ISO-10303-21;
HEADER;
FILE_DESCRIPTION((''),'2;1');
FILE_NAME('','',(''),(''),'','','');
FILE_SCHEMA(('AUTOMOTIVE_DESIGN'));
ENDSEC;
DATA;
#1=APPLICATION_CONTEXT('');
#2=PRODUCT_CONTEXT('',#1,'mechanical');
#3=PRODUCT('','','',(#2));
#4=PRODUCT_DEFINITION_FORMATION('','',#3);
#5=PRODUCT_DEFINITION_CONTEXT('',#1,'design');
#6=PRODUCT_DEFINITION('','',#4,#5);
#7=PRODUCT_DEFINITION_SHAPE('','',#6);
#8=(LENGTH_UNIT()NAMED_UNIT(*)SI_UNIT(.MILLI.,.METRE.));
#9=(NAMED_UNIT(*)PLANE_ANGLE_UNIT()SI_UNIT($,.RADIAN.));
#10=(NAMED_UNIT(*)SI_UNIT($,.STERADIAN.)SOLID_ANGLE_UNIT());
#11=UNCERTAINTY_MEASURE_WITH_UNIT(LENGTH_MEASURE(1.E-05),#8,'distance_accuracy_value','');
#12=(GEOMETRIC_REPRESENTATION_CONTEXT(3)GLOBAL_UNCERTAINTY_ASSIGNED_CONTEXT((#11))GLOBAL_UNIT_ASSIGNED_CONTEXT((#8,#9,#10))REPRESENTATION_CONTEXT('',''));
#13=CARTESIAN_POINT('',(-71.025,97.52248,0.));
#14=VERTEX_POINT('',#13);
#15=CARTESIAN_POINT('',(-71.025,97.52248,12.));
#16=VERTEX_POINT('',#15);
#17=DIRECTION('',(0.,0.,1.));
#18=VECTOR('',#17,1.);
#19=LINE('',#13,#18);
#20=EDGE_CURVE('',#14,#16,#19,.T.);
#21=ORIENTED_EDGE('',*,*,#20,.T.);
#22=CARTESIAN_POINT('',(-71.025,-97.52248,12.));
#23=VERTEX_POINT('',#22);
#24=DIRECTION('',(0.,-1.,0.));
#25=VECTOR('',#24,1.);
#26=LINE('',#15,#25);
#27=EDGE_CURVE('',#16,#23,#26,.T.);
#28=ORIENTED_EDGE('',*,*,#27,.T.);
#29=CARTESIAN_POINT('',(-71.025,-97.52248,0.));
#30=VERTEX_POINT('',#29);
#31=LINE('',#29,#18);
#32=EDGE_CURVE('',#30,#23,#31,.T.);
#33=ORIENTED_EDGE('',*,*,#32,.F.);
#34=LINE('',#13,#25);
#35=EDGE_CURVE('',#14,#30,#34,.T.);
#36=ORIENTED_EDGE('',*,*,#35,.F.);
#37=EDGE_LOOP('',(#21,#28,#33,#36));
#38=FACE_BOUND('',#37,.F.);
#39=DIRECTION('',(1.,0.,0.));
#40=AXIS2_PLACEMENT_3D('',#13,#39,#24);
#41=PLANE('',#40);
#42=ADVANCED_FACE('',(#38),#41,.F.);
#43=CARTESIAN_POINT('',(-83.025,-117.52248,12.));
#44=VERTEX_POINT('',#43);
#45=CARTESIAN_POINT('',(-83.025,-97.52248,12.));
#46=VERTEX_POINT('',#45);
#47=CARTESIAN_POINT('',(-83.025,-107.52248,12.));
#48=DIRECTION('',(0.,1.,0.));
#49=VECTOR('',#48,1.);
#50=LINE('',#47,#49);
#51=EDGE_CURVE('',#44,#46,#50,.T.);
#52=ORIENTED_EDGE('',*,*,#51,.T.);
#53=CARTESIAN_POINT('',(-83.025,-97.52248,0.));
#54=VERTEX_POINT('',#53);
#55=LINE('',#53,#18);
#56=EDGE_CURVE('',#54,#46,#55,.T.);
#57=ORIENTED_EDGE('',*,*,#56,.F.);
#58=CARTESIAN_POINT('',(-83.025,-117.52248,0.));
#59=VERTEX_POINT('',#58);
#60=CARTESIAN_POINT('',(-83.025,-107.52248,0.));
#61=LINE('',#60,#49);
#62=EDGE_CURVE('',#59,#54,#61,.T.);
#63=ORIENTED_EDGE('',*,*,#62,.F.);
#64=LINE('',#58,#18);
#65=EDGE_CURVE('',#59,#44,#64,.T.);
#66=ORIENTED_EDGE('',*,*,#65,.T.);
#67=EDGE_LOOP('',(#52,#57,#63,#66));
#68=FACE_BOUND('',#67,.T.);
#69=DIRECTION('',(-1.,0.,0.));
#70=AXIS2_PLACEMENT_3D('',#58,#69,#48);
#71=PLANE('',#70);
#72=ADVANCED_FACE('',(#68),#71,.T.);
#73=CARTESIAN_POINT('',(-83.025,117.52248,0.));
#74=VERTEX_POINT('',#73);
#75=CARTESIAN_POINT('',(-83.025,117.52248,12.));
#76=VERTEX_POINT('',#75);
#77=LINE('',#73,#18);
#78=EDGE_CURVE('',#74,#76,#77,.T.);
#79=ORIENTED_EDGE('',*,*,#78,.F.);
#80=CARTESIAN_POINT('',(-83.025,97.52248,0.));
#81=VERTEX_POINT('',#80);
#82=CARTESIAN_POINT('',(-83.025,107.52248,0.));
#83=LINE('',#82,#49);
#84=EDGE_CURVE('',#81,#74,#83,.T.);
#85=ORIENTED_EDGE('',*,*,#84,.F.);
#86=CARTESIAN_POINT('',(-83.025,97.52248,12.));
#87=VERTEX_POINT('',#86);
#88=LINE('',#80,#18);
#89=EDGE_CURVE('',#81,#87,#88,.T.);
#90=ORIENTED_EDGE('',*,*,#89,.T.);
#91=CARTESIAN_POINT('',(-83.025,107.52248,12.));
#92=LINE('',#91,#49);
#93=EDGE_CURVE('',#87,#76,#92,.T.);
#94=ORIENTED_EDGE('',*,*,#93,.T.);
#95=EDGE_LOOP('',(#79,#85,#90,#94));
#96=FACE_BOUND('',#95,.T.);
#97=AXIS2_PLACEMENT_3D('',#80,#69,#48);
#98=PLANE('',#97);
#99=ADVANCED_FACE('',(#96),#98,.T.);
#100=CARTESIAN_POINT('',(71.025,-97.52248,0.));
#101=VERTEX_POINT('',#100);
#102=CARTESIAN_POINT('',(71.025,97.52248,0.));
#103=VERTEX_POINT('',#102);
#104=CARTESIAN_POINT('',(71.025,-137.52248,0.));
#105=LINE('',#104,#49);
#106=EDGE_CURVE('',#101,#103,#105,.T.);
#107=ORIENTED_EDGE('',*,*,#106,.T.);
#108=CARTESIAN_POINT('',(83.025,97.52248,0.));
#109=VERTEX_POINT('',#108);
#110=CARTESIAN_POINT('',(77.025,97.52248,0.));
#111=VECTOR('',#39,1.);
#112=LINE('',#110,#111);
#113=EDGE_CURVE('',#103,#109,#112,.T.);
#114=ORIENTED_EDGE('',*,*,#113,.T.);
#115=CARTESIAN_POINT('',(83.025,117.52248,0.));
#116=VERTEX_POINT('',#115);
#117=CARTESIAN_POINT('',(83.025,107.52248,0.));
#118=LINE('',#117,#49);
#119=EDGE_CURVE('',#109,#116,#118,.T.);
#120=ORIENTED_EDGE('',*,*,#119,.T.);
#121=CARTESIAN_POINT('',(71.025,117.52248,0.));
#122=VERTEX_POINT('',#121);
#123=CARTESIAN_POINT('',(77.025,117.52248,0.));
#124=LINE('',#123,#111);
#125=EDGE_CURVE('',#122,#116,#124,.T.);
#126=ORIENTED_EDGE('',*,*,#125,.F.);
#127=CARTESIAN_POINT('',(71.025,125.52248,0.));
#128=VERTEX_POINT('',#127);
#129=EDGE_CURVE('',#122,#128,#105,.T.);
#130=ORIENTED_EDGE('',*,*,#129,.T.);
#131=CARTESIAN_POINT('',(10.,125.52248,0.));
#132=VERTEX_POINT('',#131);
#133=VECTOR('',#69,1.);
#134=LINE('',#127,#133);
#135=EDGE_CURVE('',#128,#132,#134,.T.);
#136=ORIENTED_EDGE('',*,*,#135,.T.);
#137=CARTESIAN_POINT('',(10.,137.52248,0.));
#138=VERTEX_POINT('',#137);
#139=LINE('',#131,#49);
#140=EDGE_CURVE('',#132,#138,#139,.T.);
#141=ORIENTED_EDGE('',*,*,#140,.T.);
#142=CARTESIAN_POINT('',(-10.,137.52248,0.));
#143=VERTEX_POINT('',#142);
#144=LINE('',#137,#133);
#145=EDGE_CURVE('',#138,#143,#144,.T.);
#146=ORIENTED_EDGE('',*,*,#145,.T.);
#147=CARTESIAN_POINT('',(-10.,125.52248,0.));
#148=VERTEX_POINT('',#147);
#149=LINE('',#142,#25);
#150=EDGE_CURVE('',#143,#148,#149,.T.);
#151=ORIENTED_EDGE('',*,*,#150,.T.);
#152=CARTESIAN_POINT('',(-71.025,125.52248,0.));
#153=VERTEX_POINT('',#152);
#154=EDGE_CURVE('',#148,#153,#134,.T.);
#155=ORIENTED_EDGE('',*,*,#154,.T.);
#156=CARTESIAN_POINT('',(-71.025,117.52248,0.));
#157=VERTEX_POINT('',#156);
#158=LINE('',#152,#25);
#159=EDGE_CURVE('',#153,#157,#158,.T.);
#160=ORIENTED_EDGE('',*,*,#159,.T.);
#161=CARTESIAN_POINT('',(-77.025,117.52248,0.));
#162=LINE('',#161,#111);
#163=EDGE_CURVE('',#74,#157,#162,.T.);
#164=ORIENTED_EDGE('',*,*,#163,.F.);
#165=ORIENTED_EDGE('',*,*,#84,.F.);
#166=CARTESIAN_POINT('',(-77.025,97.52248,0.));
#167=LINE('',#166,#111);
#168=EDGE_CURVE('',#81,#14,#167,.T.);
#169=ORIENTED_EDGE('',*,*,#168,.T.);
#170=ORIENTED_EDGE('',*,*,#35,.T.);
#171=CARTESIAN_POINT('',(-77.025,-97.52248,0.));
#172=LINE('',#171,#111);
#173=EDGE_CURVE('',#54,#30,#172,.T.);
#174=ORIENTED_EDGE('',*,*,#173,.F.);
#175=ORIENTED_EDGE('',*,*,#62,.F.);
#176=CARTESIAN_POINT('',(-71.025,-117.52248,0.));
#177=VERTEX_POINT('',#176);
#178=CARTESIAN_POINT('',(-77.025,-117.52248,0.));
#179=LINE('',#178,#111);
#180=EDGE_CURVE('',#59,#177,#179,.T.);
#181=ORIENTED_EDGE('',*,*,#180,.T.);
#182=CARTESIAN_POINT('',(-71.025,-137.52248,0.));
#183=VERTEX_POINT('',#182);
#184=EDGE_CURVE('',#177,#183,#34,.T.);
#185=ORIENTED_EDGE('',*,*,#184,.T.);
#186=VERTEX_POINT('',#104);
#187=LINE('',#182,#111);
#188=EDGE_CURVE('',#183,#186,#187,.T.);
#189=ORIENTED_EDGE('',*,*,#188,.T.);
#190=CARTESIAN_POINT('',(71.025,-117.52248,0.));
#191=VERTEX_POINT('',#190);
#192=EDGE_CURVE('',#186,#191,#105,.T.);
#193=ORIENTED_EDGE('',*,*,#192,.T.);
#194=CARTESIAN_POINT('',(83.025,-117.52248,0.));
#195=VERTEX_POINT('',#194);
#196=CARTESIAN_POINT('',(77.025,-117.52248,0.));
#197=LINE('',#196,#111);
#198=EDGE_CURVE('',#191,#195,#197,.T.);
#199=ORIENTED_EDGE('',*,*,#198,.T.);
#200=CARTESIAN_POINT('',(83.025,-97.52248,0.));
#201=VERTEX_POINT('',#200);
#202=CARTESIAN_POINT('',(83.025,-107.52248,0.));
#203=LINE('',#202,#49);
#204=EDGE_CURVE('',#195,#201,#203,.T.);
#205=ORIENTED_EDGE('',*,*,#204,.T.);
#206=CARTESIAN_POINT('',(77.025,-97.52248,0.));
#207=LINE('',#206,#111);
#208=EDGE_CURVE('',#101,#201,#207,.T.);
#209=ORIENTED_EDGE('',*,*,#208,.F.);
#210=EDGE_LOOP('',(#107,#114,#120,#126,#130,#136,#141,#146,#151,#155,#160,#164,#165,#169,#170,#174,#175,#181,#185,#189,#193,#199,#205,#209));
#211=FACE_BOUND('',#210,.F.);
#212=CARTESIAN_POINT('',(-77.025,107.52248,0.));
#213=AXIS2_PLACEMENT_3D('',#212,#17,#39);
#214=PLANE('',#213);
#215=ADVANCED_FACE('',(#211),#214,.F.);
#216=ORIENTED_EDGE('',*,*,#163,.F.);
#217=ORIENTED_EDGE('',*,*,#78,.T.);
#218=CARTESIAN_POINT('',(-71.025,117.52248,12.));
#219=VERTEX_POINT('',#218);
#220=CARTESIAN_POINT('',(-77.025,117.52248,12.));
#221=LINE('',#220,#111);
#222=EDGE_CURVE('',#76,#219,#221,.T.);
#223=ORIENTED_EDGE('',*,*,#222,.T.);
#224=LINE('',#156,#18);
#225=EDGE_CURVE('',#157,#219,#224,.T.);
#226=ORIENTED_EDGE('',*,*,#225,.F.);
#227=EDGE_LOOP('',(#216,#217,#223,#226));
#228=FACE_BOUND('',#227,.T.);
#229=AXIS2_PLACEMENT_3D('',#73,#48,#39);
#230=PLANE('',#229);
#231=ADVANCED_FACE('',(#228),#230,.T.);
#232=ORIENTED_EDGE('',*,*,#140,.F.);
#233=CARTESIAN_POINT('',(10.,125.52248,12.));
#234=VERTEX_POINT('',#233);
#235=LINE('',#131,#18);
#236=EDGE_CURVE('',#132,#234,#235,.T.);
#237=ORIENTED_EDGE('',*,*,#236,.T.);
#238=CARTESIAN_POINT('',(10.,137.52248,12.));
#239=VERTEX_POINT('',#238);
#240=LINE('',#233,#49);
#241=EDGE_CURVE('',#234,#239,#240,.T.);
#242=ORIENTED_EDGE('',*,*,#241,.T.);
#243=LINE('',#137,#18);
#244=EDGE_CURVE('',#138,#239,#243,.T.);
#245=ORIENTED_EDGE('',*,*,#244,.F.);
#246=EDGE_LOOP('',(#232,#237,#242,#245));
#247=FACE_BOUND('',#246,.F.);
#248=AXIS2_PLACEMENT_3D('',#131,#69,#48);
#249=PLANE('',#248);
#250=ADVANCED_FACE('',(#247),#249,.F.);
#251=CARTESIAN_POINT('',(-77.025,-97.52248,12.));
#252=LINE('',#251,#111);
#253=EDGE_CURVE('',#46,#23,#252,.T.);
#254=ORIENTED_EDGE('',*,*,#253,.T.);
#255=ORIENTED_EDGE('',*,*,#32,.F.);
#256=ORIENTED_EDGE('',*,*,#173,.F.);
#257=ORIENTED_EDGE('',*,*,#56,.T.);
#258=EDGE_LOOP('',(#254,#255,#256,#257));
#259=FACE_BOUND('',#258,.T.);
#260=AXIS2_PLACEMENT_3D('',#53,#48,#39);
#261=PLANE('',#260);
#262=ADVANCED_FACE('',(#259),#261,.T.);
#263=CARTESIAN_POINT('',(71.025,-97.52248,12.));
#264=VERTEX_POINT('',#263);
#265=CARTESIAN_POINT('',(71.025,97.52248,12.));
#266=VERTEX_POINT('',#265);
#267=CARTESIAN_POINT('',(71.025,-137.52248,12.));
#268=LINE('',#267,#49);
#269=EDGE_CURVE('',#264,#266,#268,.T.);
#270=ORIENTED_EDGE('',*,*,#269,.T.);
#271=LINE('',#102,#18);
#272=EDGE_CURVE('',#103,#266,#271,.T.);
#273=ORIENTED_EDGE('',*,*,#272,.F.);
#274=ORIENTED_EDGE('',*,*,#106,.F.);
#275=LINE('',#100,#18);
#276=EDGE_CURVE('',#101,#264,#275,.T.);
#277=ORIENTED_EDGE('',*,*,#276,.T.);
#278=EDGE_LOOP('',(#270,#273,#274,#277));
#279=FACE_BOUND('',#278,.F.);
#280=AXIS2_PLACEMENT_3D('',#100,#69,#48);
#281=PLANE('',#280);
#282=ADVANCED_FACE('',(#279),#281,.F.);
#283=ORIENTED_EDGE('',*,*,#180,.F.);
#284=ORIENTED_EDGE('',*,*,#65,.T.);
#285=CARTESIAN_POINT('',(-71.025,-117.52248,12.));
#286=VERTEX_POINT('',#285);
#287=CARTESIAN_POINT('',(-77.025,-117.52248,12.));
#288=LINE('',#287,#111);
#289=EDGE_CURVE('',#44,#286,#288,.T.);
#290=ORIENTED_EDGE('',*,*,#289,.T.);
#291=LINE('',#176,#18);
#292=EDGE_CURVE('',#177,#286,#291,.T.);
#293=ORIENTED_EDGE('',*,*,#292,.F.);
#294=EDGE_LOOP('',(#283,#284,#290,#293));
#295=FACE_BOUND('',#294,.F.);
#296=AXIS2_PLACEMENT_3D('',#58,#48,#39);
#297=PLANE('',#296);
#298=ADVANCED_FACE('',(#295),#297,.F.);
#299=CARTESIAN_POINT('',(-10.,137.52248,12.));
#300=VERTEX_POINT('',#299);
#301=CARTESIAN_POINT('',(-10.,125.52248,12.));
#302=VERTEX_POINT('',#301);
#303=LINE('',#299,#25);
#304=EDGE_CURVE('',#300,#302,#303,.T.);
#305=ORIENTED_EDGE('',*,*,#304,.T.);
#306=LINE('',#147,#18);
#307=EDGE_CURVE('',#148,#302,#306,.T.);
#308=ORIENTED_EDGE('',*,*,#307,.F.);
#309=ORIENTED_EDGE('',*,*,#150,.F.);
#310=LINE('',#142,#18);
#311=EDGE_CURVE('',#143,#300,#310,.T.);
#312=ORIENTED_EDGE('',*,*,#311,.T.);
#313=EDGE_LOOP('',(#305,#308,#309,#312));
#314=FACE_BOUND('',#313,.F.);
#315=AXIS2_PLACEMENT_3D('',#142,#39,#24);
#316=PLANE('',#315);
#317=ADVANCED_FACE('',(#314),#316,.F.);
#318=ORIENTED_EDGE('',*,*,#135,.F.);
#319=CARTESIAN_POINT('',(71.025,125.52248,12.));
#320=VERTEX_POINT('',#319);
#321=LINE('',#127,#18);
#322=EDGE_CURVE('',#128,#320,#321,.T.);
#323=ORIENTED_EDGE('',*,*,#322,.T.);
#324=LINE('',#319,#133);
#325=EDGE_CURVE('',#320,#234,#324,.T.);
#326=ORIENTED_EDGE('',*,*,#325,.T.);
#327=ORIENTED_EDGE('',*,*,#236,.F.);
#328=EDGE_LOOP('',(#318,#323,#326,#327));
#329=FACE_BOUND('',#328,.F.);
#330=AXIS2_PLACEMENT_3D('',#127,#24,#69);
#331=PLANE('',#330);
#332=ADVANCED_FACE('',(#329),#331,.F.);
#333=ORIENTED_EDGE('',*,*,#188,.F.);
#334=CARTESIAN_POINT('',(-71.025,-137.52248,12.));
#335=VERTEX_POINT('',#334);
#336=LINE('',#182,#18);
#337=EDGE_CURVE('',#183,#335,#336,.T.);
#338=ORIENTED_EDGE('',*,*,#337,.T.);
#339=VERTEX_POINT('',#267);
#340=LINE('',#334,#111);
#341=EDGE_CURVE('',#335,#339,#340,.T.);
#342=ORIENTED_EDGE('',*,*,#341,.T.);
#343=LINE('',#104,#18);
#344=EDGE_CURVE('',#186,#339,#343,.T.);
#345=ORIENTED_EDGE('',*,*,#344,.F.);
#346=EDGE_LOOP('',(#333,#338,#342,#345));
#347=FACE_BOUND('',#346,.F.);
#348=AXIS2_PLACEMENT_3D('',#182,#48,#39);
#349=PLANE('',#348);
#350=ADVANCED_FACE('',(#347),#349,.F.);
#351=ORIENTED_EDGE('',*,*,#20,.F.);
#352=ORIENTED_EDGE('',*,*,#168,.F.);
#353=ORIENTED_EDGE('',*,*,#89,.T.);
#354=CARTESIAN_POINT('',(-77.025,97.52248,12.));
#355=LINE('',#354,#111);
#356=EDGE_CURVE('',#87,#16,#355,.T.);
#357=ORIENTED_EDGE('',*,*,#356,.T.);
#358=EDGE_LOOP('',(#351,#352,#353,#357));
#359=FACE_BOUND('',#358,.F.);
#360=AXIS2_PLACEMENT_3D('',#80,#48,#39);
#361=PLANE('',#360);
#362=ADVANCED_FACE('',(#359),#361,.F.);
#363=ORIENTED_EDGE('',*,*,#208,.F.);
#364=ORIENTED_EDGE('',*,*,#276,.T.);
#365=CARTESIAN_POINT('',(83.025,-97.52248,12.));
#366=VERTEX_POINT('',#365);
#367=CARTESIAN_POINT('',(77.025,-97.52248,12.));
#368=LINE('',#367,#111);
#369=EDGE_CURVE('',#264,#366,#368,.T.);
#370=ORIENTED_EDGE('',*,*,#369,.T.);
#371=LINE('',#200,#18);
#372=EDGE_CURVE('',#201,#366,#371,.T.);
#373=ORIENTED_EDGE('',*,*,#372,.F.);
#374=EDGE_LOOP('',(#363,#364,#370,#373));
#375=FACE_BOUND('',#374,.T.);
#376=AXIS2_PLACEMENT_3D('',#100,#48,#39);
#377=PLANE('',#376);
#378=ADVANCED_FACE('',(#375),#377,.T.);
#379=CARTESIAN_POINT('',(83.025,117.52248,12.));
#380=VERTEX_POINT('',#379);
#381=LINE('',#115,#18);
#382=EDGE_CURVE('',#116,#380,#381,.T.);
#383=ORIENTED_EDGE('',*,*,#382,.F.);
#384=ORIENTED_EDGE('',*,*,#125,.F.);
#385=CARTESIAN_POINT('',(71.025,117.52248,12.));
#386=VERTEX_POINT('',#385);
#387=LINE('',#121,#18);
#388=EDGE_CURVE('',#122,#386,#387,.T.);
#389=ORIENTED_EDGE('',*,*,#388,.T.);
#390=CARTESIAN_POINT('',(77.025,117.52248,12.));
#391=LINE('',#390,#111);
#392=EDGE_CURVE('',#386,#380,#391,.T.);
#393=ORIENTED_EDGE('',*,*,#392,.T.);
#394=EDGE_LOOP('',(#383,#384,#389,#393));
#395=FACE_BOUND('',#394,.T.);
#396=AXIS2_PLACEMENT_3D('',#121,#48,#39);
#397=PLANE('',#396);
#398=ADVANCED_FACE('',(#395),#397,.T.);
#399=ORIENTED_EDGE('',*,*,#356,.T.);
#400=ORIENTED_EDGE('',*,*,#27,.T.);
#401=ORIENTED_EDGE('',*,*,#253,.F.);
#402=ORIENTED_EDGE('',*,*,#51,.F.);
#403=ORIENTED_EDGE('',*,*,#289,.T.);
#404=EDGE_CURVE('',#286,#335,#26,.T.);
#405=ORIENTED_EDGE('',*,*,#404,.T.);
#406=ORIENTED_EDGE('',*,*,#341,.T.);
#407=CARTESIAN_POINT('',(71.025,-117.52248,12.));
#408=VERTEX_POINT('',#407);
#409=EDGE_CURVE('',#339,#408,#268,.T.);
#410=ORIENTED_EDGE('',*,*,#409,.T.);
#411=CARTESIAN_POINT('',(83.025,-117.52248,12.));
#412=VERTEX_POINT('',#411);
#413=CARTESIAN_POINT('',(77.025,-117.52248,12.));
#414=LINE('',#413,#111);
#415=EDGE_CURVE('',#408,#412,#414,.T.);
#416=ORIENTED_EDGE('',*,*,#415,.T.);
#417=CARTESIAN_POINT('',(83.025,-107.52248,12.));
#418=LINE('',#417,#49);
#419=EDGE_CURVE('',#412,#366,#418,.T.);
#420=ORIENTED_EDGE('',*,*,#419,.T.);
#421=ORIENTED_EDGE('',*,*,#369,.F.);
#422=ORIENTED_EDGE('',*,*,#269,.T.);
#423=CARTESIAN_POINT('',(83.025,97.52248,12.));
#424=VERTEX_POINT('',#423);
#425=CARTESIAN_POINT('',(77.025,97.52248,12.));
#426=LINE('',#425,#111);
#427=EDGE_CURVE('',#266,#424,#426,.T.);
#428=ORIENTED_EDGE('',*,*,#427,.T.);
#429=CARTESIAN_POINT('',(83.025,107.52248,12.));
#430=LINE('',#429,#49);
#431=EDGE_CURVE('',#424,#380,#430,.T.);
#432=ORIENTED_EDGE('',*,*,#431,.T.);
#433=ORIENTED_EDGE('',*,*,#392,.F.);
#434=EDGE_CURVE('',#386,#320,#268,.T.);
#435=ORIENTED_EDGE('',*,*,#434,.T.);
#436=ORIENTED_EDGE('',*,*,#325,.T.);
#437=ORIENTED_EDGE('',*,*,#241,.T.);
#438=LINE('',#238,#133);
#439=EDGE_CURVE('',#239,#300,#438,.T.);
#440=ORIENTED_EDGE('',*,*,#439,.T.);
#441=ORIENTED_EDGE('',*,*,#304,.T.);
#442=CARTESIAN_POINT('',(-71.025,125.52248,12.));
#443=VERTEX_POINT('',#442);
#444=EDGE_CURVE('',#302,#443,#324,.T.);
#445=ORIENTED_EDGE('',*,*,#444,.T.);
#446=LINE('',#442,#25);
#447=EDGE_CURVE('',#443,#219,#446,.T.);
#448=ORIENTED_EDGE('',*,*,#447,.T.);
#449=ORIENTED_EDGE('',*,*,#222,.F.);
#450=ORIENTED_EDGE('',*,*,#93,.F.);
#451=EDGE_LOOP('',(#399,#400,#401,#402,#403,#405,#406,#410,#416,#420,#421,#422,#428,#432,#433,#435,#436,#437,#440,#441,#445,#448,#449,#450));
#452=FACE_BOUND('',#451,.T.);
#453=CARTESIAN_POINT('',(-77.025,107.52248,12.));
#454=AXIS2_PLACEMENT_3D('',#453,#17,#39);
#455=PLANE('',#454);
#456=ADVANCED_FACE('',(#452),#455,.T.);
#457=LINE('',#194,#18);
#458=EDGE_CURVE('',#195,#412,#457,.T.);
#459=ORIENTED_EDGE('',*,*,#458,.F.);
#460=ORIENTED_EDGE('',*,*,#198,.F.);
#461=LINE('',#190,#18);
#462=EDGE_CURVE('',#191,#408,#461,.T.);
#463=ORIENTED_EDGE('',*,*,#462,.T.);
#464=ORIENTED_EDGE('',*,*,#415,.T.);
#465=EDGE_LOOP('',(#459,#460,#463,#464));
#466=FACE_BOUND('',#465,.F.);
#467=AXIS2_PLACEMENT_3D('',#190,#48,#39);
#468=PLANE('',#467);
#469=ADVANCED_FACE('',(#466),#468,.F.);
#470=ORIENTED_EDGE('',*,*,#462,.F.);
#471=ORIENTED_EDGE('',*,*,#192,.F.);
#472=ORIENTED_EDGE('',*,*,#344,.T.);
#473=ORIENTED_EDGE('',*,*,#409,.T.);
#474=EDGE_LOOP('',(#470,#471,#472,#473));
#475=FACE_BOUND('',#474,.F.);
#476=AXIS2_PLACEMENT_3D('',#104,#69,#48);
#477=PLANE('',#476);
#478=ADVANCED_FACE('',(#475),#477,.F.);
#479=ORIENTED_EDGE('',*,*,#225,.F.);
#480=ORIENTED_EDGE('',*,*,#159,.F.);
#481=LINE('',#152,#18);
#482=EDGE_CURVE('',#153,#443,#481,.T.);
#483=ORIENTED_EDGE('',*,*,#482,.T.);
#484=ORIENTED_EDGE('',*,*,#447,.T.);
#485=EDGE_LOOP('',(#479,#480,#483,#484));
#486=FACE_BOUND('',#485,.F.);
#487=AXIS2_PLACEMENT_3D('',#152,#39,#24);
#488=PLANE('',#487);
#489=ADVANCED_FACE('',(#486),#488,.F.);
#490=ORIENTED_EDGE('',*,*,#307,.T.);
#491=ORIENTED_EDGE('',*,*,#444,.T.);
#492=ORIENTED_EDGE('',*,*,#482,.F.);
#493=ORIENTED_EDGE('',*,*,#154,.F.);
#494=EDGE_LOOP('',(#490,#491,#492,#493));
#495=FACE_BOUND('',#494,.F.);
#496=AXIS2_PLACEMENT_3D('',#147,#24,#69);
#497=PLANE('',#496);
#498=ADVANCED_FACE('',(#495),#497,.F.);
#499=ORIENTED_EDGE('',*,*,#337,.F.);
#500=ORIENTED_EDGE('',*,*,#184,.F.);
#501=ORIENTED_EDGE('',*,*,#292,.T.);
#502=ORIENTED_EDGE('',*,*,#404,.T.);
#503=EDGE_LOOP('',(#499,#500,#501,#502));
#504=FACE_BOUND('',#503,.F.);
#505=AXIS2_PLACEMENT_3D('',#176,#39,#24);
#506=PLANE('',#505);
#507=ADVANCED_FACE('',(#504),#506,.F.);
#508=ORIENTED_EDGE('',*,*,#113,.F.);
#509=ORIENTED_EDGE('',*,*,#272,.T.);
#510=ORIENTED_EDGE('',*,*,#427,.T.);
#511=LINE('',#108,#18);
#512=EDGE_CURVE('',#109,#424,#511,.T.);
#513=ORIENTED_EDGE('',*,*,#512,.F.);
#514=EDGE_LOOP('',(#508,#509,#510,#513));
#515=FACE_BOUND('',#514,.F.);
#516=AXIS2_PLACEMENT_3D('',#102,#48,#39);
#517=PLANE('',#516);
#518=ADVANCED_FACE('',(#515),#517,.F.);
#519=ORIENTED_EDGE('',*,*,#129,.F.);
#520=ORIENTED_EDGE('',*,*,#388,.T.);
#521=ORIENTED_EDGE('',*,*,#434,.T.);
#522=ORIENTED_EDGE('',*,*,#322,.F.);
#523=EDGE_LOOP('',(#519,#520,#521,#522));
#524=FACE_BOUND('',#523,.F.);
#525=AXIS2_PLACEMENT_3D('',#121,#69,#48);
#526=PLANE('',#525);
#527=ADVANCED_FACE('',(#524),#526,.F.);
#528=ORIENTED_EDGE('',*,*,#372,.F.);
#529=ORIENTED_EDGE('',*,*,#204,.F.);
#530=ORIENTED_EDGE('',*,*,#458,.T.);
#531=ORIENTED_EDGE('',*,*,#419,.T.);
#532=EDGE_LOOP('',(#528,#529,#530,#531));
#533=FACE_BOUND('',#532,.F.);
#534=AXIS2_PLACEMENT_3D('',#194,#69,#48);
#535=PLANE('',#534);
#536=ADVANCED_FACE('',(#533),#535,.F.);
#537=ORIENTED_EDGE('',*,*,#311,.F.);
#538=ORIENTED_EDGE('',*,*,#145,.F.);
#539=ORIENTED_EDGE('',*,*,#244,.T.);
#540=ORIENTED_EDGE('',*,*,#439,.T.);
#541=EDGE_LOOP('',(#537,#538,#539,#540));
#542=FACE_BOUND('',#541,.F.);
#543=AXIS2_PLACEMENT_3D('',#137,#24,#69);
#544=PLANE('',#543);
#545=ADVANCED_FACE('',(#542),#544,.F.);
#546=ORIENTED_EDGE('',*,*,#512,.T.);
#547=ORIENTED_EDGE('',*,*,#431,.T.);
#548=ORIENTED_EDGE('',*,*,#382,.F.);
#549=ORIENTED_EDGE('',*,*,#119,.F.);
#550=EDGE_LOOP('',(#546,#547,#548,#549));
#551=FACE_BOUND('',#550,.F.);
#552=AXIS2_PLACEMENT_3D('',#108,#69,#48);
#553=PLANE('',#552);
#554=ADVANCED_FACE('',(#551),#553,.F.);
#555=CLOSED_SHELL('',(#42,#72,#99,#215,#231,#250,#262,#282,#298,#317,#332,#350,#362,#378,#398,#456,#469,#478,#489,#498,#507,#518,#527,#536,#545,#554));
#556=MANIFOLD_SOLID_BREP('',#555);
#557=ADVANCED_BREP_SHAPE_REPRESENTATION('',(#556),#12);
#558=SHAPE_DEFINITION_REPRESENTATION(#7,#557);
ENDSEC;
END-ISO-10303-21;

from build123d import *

# Parameters (mm, degrees)
F0_W     = 12
F0_H     = 20
F1_DEPTH = 12


# Not quite as in the source:
# - a feature names something its author has since deleted; it is built from what else it names


with BuildPart() as f1:
    # F0 (on Top) → F1 (new body)
    with BuildSketch(Plane.XY):
        with Locations((-77.025, 107.52248)):
            Rectangle(F0_W, F0_H)
        Polygon((71.025, 125.52248), (10, 125.52248), (-10, 125.52248), (-71.025, 125.52248), (-71.025, 117.52248), (-71.025, 97.52248), (-71.025, -97.52248), (-71.025, -117.52248), (-71.025, -137.52248), (71.025, -137.52248), (71.025, -117.52248), (71.025, -97.52248), (71.025, 97.52248), (71.025, 117.52248), align=None)
        with Locations((77.025, 107.52248)):
            Rectangle(F0_W, F0_H)
        with Locations((-77.025, -107.52248)):
            Rectangle(F0_W, F0_H)
        with Locations((77.025, -107.52248)):
            Rectangle(F0_W, F0_H)
        Polygon((10, 127.52248), (10, 137.52248), (-10, 137.52248), (-10, 127.52248), (-10, 125.52248), (10, 125.52248), align=None)
    extrude(amount=F1_DEPTH)


solid = f1.part
